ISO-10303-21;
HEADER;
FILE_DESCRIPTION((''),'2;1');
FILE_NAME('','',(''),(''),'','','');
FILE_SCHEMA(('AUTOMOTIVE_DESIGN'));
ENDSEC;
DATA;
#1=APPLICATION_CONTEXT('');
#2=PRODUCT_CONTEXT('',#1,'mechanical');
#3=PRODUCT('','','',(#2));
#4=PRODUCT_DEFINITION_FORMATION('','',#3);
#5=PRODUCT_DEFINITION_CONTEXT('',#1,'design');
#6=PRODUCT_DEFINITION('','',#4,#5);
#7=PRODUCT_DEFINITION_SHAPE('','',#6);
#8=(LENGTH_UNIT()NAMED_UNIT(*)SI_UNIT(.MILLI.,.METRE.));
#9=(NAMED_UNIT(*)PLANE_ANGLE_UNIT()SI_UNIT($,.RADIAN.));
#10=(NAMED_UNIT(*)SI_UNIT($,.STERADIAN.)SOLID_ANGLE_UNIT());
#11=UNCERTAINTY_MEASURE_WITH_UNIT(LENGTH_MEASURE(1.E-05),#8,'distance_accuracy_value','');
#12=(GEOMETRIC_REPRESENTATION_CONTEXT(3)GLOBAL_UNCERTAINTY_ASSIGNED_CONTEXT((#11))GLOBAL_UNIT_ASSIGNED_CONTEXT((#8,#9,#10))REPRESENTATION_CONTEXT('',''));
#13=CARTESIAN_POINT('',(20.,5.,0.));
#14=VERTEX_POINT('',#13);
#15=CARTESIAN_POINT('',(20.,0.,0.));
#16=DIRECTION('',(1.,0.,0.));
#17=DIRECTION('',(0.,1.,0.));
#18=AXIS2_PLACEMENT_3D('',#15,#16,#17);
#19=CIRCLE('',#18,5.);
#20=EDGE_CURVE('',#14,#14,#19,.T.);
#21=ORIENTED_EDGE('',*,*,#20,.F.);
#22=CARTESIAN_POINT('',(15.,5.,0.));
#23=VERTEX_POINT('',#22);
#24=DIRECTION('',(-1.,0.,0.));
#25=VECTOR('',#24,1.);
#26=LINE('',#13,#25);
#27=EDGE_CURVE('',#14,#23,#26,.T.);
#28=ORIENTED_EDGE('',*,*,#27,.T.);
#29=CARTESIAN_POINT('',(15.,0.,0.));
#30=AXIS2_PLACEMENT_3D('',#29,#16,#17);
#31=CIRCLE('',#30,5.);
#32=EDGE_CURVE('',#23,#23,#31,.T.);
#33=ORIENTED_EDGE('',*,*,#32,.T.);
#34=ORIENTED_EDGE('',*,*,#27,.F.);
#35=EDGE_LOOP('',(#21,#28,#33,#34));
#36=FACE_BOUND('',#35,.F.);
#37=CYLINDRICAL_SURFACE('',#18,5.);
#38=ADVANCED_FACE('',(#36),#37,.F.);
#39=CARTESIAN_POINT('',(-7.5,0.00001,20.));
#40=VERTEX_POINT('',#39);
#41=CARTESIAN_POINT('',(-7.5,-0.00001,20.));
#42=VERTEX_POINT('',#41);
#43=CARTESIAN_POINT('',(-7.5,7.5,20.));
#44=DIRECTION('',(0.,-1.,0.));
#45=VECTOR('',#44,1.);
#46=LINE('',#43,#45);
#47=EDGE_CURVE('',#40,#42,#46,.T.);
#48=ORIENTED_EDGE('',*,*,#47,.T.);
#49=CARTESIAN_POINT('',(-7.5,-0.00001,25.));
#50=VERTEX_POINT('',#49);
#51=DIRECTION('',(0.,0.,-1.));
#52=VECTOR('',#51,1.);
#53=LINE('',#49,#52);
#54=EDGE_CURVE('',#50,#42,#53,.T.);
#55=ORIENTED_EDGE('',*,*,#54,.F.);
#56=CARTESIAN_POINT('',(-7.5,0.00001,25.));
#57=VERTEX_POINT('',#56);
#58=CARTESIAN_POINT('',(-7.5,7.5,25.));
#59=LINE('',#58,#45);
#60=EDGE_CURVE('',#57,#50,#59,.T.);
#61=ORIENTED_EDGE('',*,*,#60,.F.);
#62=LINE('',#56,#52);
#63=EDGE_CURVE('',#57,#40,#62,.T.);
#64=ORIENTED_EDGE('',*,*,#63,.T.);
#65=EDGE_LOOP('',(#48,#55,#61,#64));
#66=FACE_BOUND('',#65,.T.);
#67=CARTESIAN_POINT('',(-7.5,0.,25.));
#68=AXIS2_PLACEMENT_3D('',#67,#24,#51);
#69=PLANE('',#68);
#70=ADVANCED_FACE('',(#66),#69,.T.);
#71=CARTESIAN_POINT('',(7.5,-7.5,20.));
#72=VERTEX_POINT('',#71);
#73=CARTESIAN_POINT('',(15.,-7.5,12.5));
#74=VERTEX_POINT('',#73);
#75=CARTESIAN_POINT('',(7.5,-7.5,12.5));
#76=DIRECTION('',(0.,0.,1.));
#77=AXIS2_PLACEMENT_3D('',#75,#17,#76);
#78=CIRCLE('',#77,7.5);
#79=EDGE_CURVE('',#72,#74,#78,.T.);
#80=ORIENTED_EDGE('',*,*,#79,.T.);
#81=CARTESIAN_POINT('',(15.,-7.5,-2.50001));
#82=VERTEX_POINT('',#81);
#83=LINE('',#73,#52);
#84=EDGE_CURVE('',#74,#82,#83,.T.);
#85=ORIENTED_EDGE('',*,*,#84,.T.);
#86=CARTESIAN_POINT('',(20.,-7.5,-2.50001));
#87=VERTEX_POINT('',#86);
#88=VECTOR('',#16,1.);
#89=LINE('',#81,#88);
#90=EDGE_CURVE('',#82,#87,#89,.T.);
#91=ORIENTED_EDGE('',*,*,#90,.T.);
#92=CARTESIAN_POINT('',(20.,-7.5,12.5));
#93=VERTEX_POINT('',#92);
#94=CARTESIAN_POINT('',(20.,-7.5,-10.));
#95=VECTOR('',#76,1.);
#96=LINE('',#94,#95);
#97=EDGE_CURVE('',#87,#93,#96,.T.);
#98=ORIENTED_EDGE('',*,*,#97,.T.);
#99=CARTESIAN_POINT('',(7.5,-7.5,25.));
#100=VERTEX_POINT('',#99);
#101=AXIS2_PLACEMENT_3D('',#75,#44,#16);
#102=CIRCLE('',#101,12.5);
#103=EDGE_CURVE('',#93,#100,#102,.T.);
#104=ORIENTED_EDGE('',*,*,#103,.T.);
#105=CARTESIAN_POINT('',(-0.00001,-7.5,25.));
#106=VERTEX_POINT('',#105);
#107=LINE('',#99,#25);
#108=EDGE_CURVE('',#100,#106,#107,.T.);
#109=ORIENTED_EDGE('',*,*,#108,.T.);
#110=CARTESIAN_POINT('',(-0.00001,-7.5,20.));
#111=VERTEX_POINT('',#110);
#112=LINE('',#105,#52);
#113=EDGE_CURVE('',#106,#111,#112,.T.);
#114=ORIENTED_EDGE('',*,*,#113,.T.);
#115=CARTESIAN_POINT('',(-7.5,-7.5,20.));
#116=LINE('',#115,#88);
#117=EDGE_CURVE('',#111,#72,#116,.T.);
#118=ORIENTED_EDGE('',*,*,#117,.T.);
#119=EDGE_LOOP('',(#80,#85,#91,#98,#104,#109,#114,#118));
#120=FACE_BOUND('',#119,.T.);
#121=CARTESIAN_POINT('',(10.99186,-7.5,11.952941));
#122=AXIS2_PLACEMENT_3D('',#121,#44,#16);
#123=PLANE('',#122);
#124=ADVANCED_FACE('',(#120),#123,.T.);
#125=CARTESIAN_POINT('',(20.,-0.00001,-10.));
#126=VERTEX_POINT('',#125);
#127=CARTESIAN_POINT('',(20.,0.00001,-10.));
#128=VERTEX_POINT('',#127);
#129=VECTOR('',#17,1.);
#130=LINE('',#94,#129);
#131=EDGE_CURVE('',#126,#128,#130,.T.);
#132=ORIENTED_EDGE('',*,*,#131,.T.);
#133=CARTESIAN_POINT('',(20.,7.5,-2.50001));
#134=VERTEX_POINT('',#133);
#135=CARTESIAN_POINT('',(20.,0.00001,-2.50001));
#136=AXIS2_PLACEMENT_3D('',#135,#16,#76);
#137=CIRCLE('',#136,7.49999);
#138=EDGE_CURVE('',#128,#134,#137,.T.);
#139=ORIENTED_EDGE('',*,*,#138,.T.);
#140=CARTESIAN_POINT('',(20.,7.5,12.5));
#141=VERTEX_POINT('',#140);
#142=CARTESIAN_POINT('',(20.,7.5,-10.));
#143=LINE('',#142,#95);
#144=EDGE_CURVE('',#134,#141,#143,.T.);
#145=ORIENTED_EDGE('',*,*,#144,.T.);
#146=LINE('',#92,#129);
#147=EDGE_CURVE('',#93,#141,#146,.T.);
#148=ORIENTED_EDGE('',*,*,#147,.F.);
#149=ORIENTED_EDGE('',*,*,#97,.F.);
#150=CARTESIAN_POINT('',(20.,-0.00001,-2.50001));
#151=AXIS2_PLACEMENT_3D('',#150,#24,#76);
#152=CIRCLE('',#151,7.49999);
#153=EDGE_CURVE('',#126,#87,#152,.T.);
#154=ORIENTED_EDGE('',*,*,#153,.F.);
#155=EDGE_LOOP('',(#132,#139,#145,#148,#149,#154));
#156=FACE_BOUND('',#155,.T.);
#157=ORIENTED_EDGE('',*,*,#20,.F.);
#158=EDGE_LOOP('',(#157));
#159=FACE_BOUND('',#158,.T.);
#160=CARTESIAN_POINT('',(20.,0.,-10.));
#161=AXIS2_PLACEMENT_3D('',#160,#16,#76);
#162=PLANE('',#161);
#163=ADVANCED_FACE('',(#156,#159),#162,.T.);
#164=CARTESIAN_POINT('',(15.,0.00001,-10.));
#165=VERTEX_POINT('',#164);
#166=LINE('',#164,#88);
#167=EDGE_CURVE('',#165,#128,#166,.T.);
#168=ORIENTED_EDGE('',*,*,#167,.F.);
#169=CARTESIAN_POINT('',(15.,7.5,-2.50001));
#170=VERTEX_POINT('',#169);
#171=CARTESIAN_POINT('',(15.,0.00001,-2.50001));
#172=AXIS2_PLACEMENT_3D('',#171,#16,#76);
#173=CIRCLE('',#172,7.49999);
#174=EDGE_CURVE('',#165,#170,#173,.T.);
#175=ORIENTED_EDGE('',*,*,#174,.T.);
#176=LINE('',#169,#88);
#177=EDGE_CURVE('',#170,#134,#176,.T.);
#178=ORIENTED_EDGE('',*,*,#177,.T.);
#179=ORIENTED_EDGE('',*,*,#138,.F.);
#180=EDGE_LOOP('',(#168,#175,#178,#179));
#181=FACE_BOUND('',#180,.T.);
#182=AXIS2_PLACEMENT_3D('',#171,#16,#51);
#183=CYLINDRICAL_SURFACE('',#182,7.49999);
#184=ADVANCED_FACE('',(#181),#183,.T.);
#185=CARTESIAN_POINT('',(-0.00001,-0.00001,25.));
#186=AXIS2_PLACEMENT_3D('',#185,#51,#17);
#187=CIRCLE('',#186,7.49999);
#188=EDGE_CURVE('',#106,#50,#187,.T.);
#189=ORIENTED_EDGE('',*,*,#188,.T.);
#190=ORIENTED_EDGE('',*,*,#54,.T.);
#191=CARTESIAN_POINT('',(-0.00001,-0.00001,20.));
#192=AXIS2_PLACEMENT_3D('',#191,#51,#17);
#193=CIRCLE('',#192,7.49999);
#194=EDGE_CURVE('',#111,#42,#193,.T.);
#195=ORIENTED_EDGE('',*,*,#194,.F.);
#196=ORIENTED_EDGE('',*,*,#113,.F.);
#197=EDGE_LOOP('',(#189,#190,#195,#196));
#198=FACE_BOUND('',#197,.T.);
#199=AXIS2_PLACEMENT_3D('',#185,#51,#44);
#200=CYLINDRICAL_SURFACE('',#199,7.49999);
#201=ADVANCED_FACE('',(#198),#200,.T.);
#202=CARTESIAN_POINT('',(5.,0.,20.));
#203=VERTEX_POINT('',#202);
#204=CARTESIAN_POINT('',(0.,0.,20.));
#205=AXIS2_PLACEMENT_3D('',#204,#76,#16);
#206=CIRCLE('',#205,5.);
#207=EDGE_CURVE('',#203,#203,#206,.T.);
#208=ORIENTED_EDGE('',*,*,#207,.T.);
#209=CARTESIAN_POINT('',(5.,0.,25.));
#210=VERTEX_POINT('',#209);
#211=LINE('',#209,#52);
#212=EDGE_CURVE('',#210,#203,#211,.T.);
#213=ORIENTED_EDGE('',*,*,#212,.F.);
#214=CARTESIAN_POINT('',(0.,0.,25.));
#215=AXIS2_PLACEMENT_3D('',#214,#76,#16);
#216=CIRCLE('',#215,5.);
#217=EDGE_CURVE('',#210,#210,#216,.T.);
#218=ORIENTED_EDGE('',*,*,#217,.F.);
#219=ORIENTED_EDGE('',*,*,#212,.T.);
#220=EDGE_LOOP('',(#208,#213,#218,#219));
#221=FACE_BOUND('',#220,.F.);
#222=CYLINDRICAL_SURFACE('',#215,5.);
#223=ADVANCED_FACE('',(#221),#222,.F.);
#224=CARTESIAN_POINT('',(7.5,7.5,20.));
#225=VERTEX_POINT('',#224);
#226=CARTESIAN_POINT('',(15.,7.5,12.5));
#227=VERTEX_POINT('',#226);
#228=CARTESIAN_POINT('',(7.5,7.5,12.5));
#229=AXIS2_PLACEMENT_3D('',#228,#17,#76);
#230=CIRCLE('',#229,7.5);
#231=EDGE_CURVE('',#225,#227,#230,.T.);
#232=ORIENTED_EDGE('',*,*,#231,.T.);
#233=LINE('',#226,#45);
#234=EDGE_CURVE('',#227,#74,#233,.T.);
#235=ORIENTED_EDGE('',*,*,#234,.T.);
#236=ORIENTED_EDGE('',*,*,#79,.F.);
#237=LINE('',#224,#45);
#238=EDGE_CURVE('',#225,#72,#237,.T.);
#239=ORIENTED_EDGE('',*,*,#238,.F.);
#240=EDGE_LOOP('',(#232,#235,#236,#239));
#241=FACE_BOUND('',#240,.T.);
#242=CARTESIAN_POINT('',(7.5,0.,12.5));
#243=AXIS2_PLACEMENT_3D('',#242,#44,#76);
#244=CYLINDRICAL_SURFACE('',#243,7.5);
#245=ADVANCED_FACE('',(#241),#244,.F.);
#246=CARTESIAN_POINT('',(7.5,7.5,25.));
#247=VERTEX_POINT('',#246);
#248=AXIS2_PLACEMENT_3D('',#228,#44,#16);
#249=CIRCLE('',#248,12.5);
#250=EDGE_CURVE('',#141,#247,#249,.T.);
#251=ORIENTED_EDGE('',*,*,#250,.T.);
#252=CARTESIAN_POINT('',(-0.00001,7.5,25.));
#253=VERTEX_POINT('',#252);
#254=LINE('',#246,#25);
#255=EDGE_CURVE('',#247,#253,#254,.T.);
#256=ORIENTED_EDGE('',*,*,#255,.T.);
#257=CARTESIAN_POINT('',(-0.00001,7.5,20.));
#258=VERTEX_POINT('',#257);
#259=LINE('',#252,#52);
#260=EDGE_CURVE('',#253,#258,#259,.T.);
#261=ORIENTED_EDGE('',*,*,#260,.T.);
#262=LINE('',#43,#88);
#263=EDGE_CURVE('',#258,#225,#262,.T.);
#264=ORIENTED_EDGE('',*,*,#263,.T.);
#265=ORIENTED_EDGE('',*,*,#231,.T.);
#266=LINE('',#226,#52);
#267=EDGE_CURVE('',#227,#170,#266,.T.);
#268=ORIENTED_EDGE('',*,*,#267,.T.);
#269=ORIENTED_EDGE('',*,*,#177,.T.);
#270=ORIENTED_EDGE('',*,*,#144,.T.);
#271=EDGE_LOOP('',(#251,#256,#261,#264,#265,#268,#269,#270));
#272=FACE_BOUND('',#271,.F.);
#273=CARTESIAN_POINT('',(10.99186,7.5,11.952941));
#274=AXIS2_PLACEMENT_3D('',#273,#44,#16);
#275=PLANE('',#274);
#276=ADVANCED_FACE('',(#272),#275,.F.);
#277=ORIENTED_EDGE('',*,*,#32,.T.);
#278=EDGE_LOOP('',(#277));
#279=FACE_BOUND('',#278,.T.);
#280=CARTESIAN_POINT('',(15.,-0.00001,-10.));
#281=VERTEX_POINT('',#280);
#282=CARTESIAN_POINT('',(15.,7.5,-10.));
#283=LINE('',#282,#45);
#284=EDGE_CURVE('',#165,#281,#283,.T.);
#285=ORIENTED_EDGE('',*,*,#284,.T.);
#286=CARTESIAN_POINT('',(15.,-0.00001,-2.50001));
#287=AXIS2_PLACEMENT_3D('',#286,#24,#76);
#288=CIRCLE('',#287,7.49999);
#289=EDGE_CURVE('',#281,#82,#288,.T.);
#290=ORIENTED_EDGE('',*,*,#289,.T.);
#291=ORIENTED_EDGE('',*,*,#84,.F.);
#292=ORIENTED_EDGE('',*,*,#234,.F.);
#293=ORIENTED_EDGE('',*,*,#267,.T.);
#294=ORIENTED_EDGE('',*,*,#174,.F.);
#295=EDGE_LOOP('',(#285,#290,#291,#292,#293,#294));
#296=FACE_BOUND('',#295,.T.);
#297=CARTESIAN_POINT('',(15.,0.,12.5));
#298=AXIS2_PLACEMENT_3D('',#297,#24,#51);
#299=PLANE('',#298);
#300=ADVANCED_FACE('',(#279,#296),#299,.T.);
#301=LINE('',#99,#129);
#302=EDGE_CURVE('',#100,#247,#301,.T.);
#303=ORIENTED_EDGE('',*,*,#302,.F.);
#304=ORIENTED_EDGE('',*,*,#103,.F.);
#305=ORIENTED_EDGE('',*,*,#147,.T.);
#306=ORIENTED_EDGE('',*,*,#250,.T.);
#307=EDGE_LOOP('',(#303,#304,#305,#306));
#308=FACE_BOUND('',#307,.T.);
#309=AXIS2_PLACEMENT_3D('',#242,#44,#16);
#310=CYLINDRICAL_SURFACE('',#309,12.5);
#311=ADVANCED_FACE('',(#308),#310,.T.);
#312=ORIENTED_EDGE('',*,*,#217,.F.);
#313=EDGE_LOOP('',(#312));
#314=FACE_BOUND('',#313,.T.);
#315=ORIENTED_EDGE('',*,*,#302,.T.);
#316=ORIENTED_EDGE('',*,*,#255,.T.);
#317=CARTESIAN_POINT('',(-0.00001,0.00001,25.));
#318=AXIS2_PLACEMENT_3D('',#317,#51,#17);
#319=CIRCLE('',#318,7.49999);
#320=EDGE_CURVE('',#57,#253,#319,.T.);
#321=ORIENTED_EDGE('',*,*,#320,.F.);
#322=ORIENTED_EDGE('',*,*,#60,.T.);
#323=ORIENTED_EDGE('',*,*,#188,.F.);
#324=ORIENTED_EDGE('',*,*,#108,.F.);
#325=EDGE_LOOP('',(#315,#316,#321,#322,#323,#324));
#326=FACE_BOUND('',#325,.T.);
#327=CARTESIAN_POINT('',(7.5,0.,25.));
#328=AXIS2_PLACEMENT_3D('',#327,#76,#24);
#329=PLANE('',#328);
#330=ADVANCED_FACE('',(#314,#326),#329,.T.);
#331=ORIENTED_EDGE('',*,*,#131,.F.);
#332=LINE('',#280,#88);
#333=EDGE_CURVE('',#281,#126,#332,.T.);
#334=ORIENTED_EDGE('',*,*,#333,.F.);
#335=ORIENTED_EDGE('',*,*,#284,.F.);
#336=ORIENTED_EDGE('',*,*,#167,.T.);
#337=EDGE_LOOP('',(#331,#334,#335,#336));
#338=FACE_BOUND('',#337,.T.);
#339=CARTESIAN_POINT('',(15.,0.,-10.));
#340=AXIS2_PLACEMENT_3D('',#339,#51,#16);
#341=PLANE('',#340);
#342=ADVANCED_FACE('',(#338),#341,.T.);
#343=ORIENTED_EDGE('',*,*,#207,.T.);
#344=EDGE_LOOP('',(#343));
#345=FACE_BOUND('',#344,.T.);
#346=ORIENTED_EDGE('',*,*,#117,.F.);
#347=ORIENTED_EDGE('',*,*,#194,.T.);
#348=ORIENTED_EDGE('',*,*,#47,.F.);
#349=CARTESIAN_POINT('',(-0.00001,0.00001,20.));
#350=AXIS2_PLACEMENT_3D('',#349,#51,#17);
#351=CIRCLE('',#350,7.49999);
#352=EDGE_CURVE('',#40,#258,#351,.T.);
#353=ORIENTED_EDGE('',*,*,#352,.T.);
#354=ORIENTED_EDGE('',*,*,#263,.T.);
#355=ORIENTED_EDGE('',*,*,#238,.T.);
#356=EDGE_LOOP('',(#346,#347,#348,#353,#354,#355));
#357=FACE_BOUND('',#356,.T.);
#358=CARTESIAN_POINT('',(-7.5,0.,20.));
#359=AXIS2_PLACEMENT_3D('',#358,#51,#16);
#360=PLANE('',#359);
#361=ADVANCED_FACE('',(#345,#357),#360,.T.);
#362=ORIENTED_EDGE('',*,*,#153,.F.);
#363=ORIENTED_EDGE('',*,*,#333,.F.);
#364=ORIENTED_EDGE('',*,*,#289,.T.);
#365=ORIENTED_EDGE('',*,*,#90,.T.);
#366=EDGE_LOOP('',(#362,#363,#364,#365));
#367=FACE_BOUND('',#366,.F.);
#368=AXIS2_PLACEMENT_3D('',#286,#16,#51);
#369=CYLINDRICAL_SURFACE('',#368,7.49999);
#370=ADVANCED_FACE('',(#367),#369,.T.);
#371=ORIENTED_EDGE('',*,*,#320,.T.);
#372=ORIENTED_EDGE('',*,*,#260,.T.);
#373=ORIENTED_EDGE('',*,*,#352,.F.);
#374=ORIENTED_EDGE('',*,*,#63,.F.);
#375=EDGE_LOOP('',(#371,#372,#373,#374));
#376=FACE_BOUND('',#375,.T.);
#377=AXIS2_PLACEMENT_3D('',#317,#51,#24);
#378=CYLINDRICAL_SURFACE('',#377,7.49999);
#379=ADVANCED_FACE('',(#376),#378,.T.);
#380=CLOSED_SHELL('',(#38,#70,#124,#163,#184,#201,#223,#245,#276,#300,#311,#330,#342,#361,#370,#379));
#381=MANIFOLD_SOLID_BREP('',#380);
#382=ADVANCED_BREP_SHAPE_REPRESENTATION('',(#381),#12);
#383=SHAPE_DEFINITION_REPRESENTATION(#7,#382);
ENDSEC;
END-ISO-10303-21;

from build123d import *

# Parameters (mm, degrees)
F1_DEPTH = 7.5
F2_R     = 7.49999
F3_R     = 5
F4_DEPTH = 35.001
F5_R     = 5
F6_DEPTH = 27.501


# Not quite as in the source:
# - a fillet or chamfer is up to 0.001 mm smaller than in the source, because OpenCascade refuses the exact size


with BuildPart() as f1:
    # F0 (on Front) → F1 (new body, symmetric)
    with BuildSketch(Plane.XZ):
        with BuildLine():
            Line((7.5, 25), (-7.5, 25))
            Line((-7.5, 25), (-7.5, 20))
            Line((-7.5, 20), (7.5, 20))
            ThreePointArc((7.5, 20), (12.8033008589, 17.8033008589), (15, 12.5))
            Line((15, 12.5), (15, -10))
            Line((15, -10), (20, -10))
            Line((20, -10), (20, 12.5))
            ThreePointArc((20, 12.5), (16.3388347648, 21.3388347648), (7.5, 25))
        make_face()
    extrude(amount=F1_DEPTH, both=True)

    # F2 (radius 7.5 in the source; OpenCascade refuses exactly that, so slightly less here)
    f2_edges = [f1.edges().sort_by_distance(p)[0] for p in [
        (-7.5, -7.5, 22.5),
        (-7.5, 7.5, 22.5),
        (17.5, -7.5, -10),
        (17.5, 7.5, -10),
    ]]
    fillet(f2_edges, radius=F2_R)

    # F3 (on face) → F4 (cut, through all)
    with BuildSketch(Plane.XY.offset(25)):
        Circle(F3_R)
    extrude(amount=-F4_DEPTH, mode=Mode.SUBTRACT)

    # F5 (on face) → F6 (cut, through all)
    with BuildSketch(Plane.YZ.offset(20)):
        Circle(F5_R)
    extrude(amount=-F6_DEPTH, mode=Mode.SUBTRACT)


solid = f1.part
